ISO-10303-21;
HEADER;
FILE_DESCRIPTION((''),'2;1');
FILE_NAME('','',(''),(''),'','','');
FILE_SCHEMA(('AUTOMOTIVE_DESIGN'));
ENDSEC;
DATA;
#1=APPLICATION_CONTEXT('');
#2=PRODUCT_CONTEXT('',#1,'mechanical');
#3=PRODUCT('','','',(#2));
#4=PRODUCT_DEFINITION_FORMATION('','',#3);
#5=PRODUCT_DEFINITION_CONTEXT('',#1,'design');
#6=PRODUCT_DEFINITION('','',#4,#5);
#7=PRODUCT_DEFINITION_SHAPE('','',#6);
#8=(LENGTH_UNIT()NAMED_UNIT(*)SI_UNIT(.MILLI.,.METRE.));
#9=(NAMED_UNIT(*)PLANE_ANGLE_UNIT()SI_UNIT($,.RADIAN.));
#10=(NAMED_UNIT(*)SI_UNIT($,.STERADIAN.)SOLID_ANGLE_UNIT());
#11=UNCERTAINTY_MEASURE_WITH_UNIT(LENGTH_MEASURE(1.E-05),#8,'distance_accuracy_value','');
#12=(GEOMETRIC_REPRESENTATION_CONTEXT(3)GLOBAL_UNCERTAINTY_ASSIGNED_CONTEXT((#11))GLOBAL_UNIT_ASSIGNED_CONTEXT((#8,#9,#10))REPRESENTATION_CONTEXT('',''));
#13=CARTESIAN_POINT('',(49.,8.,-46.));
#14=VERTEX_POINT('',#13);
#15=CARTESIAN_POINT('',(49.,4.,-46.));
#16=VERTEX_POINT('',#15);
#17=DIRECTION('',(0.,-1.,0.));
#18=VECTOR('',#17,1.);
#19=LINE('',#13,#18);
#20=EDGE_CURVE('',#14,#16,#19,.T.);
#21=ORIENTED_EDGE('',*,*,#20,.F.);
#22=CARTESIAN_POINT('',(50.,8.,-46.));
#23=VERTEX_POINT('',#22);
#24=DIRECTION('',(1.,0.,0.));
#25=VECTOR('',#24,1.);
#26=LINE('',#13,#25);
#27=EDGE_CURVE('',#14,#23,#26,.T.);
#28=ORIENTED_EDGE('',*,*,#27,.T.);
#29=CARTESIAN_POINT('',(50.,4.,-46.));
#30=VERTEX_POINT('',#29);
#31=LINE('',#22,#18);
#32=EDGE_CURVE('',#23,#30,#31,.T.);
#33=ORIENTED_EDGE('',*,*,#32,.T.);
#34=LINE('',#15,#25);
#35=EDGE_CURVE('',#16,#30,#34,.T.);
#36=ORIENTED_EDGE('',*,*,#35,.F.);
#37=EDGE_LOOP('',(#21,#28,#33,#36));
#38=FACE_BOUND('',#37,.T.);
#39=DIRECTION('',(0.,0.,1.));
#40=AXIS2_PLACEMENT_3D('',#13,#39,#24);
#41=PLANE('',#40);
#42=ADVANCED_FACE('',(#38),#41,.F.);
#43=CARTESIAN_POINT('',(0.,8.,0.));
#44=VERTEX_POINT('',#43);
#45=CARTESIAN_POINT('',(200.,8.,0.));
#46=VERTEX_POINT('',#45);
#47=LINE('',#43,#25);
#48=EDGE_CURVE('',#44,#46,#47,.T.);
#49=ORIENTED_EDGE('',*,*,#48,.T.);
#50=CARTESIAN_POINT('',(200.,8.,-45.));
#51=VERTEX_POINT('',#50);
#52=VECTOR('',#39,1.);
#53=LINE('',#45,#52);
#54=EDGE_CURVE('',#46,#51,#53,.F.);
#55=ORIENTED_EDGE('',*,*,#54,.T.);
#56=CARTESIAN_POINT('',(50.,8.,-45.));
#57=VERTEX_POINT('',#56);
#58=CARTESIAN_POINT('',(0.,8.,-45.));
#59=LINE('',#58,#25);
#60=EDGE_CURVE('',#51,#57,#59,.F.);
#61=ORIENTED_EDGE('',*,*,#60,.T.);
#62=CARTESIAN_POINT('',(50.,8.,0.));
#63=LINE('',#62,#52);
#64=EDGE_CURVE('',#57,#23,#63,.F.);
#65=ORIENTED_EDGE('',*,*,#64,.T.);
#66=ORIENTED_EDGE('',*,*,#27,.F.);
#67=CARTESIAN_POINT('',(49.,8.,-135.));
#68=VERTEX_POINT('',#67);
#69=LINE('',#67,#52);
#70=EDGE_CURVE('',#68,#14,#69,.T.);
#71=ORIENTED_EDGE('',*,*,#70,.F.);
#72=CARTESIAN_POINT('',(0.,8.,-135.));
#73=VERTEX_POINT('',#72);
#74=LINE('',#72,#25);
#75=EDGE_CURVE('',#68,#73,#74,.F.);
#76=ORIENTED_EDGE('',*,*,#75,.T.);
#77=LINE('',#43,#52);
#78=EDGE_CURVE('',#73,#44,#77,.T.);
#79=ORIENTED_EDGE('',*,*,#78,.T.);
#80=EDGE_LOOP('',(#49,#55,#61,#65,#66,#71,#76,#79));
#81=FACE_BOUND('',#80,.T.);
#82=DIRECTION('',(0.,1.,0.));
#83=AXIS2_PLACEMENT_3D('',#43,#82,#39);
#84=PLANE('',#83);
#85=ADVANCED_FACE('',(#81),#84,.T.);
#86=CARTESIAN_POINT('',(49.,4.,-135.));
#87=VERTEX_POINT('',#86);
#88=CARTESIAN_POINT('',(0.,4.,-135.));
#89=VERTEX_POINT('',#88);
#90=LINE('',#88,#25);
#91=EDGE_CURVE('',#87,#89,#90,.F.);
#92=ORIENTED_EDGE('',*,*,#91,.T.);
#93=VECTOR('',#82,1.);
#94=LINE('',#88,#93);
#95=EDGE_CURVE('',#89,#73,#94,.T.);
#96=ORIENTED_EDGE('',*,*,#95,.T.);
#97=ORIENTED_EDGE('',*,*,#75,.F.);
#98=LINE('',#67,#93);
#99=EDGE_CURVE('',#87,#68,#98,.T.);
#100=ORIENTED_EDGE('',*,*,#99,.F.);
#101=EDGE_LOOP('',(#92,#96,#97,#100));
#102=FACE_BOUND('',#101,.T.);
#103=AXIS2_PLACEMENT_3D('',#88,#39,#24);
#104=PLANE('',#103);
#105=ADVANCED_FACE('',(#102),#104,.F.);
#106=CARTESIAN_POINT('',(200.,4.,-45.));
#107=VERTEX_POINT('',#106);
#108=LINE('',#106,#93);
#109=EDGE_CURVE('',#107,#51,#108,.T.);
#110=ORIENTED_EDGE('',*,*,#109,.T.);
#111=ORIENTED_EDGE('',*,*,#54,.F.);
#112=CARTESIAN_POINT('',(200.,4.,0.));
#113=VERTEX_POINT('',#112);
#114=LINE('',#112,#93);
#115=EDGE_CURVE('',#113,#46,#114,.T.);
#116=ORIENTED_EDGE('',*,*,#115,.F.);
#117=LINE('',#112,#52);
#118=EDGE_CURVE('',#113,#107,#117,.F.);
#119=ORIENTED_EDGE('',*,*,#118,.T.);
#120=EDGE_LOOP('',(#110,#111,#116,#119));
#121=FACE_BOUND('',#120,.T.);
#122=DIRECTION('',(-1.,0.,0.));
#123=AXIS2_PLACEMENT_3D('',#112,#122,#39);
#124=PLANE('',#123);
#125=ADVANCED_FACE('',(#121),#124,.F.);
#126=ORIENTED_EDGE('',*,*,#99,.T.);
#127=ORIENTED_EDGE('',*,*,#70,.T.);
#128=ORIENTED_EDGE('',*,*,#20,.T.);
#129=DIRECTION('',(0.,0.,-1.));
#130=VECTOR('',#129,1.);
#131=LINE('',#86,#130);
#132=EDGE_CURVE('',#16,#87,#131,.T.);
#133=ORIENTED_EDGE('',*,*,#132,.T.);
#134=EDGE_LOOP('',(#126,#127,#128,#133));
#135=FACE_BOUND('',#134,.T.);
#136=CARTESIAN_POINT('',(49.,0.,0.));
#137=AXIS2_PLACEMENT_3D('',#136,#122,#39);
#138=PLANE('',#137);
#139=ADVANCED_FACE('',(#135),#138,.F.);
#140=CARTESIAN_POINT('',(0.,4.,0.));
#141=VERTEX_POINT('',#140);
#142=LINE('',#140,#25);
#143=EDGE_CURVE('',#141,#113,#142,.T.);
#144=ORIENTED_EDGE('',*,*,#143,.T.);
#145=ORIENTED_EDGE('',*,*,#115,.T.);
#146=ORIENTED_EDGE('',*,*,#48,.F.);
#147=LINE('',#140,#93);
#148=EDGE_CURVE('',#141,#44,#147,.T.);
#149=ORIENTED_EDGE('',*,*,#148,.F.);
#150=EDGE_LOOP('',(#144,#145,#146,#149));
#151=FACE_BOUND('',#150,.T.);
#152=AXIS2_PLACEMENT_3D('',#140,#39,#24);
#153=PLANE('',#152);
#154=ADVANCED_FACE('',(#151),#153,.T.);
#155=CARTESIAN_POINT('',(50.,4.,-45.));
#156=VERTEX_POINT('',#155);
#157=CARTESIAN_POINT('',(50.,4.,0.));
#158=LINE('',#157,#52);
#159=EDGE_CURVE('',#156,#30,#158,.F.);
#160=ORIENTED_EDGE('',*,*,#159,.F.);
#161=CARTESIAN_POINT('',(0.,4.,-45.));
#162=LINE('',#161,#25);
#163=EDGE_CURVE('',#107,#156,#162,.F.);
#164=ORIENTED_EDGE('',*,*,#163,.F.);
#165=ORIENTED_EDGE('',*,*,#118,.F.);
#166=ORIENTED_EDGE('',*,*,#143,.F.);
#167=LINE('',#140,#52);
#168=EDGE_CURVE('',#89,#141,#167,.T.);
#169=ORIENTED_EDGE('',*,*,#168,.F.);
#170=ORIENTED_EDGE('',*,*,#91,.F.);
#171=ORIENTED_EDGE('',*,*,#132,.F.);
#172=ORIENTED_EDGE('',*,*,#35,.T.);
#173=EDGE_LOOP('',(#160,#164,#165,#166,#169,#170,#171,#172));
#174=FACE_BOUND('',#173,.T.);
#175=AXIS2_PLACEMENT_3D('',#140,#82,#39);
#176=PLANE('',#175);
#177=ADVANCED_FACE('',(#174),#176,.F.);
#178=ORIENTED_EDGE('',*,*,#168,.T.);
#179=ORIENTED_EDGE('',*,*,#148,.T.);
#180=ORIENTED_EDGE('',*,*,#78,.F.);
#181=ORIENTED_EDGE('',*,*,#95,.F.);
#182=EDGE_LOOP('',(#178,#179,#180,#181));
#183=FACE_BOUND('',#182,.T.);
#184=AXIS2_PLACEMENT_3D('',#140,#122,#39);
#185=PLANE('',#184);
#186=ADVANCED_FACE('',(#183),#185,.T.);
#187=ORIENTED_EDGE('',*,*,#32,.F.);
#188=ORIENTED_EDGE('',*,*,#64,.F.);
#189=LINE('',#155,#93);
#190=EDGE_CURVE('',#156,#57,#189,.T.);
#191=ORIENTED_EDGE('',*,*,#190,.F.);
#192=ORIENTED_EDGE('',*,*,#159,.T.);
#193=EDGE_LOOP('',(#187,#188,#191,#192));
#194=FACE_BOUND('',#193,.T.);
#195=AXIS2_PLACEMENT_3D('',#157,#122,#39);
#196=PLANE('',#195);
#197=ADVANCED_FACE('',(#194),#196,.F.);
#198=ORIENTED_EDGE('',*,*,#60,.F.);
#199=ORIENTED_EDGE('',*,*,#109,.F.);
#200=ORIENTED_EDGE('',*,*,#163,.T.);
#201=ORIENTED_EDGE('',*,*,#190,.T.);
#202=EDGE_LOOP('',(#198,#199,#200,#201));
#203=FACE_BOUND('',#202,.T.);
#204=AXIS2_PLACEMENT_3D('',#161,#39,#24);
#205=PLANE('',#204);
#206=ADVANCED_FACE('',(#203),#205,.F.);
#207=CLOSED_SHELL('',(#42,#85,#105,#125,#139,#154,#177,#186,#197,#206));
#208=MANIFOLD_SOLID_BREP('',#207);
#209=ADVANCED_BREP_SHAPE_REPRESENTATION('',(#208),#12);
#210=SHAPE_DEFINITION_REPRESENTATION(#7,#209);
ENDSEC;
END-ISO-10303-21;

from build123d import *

# Parameters (mm, degrees)
STOCK_2D1LAYER_1_START       = -45
STOCK_2D1LAYER_1_OUTLINE_W   = 200
STOCK_2D1LAYER_1_OUTLINE_H   = 4
STOCK_2D1LAYER_1_DEPTH       = 45
STOCK_2D1LAYER_1_START_2     = -135
STOCK_2D1LAYER_1_2_OUTLINE_W = 50
STOCK_2D1LAYER_1_2_OUTLINE_H = 4
STOCK_2D1LAYER_1_2_DEPTH     = 90
SKETCH1_W                    = 89
SKETCH1_H                    = 4
CUT_EXTRUDE1_DEPTH           = 1


# Read off the part's stored shape, not the designer's step: Stock-2D1Layer-1
with BuildPart() as part:
    # Stock-2D1Layer-1 outline → Stock-2D1Layer-1 (new body)
    with BuildSketch(Plane.XY.offset(STOCK_2D1LAYER_1_START)):
        with Locations((100, 6)):
            Rectangle(STOCK_2D1LAYER_1_OUTLINE_W, STOCK_2D1LAYER_1_OUTLINE_H)
    extrude(amount=STOCK_2D1LAYER_1_DEPTH)

    # Stock-2D1Layer-1 2 outline → Stock-2D1Layer-1 2 (add)
    with BuildSketch(Plane.XY.offset(STOCK_2D1LAYER_1_START_2)):
        with Locations((25, 6)):
            Rectangle(STOCK_2D1LAYER_1_2_OUTLINE_W, STOCK_2D1LAYER_1_2_OUTLINE_H)
    extrude(amount=STOCK_2D1LAYER_1_2_DEPTH)

    # Sketch1 → Cut-Extrude1 (cut)
    with BuildSketch(Plane(origin=(50, 0, 0), x_dir=(0, 0, -1), z_dir=(1, 0, 0))):
        with Locations((90.5, 6)):
            Rectangle(SKETCH1_W, SKETCH1_H)
    extrude(amount=-CUT_EXTRUDE1_DEPTH, mode=Mode.SUBTRACT)


solid = part.part
